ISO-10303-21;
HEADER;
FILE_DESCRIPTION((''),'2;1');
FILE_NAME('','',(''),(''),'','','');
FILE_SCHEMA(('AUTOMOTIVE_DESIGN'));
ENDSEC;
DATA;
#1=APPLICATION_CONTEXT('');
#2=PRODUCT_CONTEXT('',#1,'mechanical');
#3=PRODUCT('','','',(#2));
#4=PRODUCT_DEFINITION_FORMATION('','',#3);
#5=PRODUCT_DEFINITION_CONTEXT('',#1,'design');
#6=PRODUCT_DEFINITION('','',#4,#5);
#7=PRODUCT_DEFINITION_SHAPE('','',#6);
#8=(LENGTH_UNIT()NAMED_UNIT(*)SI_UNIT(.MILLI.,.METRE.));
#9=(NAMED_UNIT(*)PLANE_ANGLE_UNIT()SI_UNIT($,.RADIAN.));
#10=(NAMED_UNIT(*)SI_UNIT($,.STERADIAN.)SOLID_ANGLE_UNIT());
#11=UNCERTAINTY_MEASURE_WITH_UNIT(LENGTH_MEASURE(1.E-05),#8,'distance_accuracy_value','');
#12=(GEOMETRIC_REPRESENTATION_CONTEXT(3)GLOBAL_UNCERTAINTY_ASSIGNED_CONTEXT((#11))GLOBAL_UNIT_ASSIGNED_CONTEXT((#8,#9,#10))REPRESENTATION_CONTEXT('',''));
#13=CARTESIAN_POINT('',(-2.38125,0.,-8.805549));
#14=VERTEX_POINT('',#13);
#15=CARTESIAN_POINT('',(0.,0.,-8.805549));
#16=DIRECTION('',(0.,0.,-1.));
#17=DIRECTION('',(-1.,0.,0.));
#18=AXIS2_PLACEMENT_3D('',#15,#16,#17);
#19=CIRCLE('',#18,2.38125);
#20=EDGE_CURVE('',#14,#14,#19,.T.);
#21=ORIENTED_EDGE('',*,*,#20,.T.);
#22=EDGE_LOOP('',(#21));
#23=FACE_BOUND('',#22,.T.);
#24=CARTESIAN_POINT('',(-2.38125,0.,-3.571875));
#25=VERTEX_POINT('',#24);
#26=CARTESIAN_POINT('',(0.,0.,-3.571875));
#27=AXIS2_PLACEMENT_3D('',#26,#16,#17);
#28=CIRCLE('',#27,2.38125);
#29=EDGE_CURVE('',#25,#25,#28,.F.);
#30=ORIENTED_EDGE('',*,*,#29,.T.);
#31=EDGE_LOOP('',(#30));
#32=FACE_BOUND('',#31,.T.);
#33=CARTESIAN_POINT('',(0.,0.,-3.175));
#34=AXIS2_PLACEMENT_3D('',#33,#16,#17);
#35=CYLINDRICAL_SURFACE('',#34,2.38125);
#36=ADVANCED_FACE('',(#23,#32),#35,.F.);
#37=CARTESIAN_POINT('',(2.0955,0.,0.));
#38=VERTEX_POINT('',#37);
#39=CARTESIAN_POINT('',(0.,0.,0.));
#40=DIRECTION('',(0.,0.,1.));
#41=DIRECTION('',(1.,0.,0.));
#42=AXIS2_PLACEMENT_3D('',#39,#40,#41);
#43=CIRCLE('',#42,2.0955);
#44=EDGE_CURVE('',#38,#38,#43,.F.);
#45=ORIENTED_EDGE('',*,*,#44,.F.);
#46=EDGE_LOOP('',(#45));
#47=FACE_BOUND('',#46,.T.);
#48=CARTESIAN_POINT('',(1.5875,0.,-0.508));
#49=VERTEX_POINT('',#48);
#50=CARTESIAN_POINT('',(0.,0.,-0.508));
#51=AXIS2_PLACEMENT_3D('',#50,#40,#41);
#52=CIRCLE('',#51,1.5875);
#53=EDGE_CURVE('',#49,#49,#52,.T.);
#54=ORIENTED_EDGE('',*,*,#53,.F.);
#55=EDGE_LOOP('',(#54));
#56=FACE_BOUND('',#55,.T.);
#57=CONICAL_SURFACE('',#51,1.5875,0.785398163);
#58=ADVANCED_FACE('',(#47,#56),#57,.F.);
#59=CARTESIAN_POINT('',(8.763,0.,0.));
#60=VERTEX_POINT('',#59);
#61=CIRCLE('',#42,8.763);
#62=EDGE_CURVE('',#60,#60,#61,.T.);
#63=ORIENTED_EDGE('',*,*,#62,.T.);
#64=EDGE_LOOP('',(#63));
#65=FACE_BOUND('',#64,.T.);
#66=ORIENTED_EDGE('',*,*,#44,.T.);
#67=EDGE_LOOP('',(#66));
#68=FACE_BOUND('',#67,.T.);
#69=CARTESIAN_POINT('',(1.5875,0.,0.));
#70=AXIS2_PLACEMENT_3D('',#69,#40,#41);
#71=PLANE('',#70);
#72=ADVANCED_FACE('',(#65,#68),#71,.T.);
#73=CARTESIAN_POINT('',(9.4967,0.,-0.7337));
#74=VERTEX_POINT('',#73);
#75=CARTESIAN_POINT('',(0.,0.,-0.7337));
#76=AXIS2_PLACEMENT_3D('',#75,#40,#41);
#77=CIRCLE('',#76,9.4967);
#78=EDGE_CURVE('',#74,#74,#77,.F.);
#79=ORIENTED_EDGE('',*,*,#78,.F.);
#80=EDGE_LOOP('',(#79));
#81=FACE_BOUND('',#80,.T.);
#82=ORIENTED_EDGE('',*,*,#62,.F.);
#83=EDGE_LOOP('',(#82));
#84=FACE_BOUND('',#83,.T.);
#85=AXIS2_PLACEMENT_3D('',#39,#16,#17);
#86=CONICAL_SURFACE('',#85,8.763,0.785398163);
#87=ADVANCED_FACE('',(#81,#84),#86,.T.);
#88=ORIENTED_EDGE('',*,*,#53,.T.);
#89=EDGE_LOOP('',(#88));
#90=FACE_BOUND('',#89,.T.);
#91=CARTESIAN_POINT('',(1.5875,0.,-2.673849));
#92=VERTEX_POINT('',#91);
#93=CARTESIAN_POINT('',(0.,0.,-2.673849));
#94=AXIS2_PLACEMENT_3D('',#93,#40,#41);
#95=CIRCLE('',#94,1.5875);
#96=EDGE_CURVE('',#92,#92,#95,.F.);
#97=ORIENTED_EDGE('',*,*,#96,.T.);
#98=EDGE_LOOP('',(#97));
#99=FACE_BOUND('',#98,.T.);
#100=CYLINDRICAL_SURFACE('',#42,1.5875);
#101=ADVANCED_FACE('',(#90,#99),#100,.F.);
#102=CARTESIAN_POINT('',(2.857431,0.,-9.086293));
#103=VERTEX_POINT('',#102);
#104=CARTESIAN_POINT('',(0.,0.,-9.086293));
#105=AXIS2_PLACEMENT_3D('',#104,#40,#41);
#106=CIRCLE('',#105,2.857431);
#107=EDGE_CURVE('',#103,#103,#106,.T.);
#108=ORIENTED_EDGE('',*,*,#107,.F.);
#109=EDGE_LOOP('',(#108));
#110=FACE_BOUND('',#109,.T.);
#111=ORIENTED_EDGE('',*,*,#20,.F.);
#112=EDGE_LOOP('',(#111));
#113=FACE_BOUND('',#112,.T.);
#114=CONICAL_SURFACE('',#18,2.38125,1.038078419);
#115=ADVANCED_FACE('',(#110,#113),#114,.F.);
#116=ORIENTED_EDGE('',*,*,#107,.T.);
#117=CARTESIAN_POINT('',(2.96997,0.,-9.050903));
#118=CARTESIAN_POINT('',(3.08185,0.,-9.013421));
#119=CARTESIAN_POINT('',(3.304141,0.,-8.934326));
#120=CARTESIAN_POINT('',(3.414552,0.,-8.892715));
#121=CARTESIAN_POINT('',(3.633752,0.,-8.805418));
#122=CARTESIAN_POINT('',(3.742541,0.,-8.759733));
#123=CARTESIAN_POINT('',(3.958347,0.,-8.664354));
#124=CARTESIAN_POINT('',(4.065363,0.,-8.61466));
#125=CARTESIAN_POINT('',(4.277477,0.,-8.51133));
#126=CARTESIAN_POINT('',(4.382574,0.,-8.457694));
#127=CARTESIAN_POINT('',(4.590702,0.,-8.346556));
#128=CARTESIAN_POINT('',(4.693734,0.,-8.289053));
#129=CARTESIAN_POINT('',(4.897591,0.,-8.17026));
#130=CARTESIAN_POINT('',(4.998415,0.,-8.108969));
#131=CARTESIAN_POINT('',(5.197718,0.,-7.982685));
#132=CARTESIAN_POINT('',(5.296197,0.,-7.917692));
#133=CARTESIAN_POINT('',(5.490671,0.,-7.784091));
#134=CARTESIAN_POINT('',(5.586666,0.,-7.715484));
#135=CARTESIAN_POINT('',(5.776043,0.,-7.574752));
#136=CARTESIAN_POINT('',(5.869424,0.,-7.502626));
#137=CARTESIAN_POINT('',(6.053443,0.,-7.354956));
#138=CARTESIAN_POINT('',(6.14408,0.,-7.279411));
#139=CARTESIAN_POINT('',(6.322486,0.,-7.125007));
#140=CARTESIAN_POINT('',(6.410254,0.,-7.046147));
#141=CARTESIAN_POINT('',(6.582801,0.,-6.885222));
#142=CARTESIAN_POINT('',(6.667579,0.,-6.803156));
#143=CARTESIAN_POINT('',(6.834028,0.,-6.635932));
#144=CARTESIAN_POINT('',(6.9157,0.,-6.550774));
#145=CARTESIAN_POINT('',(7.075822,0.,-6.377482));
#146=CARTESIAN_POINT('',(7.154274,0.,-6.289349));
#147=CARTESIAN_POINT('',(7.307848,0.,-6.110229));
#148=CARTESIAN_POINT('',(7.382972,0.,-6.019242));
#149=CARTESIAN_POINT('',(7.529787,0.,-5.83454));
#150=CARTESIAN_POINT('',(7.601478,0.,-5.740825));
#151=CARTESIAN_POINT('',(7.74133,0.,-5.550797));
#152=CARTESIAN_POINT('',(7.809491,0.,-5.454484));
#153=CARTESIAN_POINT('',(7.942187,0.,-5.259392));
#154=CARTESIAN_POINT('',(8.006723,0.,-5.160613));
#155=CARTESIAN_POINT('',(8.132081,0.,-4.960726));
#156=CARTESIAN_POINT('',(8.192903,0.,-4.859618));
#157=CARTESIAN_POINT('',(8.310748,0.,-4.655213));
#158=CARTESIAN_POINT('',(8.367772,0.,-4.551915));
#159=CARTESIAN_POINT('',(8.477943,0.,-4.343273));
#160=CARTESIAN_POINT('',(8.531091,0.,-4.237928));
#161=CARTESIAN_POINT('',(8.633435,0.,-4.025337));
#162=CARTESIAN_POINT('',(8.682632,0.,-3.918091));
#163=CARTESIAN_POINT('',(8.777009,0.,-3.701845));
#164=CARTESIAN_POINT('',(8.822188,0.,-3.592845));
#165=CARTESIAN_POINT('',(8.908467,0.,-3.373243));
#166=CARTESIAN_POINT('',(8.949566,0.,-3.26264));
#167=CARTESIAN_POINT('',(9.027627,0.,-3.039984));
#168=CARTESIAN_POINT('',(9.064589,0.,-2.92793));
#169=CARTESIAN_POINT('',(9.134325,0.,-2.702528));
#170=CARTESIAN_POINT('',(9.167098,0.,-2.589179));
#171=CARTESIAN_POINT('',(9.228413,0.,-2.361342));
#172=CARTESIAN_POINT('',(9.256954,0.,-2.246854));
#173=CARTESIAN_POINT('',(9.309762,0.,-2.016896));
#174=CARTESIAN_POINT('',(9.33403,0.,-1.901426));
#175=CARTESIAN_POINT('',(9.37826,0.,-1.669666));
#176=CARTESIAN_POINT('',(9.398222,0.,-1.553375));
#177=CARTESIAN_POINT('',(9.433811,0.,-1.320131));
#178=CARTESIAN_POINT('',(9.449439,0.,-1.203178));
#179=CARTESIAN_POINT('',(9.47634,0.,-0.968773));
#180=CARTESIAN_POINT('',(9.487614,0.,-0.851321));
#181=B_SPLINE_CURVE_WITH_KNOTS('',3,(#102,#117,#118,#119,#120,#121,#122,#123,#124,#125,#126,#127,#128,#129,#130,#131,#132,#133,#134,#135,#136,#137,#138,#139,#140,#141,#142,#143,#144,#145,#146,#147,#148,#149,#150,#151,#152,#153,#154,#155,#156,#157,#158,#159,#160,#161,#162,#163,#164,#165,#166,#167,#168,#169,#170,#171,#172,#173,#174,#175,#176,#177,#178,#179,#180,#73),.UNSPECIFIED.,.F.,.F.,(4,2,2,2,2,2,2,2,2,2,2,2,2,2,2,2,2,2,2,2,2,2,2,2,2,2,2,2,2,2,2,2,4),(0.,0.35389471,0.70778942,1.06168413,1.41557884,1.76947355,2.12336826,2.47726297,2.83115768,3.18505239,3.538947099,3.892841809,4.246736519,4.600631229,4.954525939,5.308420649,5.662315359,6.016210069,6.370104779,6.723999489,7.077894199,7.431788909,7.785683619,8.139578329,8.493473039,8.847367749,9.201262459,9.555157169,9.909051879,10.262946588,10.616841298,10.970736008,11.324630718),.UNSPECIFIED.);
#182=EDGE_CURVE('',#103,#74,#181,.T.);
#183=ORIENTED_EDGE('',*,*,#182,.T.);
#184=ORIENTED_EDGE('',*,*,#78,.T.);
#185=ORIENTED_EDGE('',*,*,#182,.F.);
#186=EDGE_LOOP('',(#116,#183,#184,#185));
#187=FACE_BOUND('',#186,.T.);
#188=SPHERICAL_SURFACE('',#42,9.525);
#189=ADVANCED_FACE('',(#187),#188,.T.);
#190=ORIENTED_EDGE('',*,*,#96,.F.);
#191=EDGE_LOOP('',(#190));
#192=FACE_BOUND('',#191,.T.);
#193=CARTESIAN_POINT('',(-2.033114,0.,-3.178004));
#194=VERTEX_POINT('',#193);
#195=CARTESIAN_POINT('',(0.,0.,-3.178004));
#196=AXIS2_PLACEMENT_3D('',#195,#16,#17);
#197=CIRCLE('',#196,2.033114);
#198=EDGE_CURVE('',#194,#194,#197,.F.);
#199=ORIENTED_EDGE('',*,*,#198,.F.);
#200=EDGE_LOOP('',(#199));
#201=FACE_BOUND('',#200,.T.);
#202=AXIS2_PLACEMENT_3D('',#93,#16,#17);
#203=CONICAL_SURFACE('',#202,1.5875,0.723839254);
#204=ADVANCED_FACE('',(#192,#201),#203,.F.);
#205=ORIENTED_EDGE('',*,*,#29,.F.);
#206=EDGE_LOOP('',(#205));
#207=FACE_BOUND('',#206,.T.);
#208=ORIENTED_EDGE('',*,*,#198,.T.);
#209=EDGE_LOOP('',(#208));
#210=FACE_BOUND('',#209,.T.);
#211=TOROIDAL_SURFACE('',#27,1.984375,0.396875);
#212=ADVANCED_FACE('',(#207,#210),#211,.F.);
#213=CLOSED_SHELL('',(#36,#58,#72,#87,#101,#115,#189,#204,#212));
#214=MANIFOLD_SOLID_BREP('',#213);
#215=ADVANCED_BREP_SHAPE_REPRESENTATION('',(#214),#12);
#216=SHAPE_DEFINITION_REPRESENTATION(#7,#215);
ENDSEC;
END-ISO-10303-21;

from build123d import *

# Parameters (mm, degrees)
SKETCH4_R          = 2.38125
CUT_EXTRUDE2_DEPTH = 6.35
FILLET1_R          = 0.396875
CHAMFER1_SIZE      = 0.762


with BuildPart() as part:
    # Sketch1 → Revolve1 (revolve)
    with BuildSketch(Plane(origin=(0, 0, 0), x_dir=(1, 0, 0), z_dir=(0, 1, 0))):
        with BuildLine():
            Line((1.5875, 0), (9.525, 0))
            ThreePointArc((9.525, 0), (7.274838916, 6.148361062), (1.5875, 9.391776656))
            Line((1.5875, 9.391776656), (1.5875, 0))
        make_face()
    revolve(axis=Axis((0, 0, 0), (0, 0, -1)))

    # Sketch4 → Cut-Extrude2 (cut)
    with BuildSketch(Plane(origin=(0, 0, -9.525), x_dir=(-1, 0, 0), z_dir=(0, 0, -1))):
        Circle(SKETCH4_R)
    extrude(amount=-CUT_EXTRUDE2_DEPTH, mode=Mode.SUBTRACT)

    # Fillet1
    fillet1_edges = [part.edges().sort_by_distance(p)[0] for p in [
        (2.38125, 0, -3.175),
    ]]
    fillet(fillet1_edges, radius=FILLET1_R)

    # Chamfer1
    # the kernel refuses this chamfer: 0.762 mm, written as the material it takes off along each edge
    with BuildSketch(Plane(origin=(0, 0, 0), x_dir=(1, 0, 0), z_dir=(0, 1, 0))) as chamfer1_piece_1:
        with BuildLine():
            Line((9.525 - CHAMFER1_SIZE, 0), (9.496699923, 0.733699923))
            ThreePointArc((9.496699923, 0.733699923), (9.517517871, 0.37746333), (9.525, 0))
            Line((9.525, 0), (9.525 - CHAMFER1_SIZE, 0))
        make_face()
    revolve(axis=Axis((0, 0, 0), (0, 0, -1)), mode=Mode.SUBTRACT)

    # Chamfer2: read off the stored shape, not the designer's step
    # Chamfer2 outline → Chamfer2 (revolve, cut)
    with BuildSketch(Plane.XZ):
        Polygon((2.033114035, -3.178004117), (1.5875, -2.673849388), (1.5875, -3.178004117), align=None)
        Polygon((1.5875, 0), (1.5875, -0.508), (2.0955, 0), align=None)
        Polygon((2.857431183, -9.086292535), (2.38125, -8.805548582), (2.38125, -9.086292535), align=None)
    revolve(axis=Axis((0, 0, 0), (0, 0, 1)), mode=Mode.SUBTRACT)

    # Chamfer2 2 outline → Chamfer2 2 (revolve, cut)
    with BuildSketch(Plane.XZ):
        with BuildLine():
            Line((2.857431193, -9.086292532), (2.38125, -9.086292535))
            Line((2.38125, -9.086292535), (2.381249991, -9.222541596))
            ThreePointArc((2.381249991, -9.222541596), (2.620226343, -9.157512703), (2.857431193, -9.086292532))
        make_face()
    revolve(axis=Axis((0, 0, 0), (0, 0, 1)), mode=Mode.SUBTRACT)


solid = part.part
